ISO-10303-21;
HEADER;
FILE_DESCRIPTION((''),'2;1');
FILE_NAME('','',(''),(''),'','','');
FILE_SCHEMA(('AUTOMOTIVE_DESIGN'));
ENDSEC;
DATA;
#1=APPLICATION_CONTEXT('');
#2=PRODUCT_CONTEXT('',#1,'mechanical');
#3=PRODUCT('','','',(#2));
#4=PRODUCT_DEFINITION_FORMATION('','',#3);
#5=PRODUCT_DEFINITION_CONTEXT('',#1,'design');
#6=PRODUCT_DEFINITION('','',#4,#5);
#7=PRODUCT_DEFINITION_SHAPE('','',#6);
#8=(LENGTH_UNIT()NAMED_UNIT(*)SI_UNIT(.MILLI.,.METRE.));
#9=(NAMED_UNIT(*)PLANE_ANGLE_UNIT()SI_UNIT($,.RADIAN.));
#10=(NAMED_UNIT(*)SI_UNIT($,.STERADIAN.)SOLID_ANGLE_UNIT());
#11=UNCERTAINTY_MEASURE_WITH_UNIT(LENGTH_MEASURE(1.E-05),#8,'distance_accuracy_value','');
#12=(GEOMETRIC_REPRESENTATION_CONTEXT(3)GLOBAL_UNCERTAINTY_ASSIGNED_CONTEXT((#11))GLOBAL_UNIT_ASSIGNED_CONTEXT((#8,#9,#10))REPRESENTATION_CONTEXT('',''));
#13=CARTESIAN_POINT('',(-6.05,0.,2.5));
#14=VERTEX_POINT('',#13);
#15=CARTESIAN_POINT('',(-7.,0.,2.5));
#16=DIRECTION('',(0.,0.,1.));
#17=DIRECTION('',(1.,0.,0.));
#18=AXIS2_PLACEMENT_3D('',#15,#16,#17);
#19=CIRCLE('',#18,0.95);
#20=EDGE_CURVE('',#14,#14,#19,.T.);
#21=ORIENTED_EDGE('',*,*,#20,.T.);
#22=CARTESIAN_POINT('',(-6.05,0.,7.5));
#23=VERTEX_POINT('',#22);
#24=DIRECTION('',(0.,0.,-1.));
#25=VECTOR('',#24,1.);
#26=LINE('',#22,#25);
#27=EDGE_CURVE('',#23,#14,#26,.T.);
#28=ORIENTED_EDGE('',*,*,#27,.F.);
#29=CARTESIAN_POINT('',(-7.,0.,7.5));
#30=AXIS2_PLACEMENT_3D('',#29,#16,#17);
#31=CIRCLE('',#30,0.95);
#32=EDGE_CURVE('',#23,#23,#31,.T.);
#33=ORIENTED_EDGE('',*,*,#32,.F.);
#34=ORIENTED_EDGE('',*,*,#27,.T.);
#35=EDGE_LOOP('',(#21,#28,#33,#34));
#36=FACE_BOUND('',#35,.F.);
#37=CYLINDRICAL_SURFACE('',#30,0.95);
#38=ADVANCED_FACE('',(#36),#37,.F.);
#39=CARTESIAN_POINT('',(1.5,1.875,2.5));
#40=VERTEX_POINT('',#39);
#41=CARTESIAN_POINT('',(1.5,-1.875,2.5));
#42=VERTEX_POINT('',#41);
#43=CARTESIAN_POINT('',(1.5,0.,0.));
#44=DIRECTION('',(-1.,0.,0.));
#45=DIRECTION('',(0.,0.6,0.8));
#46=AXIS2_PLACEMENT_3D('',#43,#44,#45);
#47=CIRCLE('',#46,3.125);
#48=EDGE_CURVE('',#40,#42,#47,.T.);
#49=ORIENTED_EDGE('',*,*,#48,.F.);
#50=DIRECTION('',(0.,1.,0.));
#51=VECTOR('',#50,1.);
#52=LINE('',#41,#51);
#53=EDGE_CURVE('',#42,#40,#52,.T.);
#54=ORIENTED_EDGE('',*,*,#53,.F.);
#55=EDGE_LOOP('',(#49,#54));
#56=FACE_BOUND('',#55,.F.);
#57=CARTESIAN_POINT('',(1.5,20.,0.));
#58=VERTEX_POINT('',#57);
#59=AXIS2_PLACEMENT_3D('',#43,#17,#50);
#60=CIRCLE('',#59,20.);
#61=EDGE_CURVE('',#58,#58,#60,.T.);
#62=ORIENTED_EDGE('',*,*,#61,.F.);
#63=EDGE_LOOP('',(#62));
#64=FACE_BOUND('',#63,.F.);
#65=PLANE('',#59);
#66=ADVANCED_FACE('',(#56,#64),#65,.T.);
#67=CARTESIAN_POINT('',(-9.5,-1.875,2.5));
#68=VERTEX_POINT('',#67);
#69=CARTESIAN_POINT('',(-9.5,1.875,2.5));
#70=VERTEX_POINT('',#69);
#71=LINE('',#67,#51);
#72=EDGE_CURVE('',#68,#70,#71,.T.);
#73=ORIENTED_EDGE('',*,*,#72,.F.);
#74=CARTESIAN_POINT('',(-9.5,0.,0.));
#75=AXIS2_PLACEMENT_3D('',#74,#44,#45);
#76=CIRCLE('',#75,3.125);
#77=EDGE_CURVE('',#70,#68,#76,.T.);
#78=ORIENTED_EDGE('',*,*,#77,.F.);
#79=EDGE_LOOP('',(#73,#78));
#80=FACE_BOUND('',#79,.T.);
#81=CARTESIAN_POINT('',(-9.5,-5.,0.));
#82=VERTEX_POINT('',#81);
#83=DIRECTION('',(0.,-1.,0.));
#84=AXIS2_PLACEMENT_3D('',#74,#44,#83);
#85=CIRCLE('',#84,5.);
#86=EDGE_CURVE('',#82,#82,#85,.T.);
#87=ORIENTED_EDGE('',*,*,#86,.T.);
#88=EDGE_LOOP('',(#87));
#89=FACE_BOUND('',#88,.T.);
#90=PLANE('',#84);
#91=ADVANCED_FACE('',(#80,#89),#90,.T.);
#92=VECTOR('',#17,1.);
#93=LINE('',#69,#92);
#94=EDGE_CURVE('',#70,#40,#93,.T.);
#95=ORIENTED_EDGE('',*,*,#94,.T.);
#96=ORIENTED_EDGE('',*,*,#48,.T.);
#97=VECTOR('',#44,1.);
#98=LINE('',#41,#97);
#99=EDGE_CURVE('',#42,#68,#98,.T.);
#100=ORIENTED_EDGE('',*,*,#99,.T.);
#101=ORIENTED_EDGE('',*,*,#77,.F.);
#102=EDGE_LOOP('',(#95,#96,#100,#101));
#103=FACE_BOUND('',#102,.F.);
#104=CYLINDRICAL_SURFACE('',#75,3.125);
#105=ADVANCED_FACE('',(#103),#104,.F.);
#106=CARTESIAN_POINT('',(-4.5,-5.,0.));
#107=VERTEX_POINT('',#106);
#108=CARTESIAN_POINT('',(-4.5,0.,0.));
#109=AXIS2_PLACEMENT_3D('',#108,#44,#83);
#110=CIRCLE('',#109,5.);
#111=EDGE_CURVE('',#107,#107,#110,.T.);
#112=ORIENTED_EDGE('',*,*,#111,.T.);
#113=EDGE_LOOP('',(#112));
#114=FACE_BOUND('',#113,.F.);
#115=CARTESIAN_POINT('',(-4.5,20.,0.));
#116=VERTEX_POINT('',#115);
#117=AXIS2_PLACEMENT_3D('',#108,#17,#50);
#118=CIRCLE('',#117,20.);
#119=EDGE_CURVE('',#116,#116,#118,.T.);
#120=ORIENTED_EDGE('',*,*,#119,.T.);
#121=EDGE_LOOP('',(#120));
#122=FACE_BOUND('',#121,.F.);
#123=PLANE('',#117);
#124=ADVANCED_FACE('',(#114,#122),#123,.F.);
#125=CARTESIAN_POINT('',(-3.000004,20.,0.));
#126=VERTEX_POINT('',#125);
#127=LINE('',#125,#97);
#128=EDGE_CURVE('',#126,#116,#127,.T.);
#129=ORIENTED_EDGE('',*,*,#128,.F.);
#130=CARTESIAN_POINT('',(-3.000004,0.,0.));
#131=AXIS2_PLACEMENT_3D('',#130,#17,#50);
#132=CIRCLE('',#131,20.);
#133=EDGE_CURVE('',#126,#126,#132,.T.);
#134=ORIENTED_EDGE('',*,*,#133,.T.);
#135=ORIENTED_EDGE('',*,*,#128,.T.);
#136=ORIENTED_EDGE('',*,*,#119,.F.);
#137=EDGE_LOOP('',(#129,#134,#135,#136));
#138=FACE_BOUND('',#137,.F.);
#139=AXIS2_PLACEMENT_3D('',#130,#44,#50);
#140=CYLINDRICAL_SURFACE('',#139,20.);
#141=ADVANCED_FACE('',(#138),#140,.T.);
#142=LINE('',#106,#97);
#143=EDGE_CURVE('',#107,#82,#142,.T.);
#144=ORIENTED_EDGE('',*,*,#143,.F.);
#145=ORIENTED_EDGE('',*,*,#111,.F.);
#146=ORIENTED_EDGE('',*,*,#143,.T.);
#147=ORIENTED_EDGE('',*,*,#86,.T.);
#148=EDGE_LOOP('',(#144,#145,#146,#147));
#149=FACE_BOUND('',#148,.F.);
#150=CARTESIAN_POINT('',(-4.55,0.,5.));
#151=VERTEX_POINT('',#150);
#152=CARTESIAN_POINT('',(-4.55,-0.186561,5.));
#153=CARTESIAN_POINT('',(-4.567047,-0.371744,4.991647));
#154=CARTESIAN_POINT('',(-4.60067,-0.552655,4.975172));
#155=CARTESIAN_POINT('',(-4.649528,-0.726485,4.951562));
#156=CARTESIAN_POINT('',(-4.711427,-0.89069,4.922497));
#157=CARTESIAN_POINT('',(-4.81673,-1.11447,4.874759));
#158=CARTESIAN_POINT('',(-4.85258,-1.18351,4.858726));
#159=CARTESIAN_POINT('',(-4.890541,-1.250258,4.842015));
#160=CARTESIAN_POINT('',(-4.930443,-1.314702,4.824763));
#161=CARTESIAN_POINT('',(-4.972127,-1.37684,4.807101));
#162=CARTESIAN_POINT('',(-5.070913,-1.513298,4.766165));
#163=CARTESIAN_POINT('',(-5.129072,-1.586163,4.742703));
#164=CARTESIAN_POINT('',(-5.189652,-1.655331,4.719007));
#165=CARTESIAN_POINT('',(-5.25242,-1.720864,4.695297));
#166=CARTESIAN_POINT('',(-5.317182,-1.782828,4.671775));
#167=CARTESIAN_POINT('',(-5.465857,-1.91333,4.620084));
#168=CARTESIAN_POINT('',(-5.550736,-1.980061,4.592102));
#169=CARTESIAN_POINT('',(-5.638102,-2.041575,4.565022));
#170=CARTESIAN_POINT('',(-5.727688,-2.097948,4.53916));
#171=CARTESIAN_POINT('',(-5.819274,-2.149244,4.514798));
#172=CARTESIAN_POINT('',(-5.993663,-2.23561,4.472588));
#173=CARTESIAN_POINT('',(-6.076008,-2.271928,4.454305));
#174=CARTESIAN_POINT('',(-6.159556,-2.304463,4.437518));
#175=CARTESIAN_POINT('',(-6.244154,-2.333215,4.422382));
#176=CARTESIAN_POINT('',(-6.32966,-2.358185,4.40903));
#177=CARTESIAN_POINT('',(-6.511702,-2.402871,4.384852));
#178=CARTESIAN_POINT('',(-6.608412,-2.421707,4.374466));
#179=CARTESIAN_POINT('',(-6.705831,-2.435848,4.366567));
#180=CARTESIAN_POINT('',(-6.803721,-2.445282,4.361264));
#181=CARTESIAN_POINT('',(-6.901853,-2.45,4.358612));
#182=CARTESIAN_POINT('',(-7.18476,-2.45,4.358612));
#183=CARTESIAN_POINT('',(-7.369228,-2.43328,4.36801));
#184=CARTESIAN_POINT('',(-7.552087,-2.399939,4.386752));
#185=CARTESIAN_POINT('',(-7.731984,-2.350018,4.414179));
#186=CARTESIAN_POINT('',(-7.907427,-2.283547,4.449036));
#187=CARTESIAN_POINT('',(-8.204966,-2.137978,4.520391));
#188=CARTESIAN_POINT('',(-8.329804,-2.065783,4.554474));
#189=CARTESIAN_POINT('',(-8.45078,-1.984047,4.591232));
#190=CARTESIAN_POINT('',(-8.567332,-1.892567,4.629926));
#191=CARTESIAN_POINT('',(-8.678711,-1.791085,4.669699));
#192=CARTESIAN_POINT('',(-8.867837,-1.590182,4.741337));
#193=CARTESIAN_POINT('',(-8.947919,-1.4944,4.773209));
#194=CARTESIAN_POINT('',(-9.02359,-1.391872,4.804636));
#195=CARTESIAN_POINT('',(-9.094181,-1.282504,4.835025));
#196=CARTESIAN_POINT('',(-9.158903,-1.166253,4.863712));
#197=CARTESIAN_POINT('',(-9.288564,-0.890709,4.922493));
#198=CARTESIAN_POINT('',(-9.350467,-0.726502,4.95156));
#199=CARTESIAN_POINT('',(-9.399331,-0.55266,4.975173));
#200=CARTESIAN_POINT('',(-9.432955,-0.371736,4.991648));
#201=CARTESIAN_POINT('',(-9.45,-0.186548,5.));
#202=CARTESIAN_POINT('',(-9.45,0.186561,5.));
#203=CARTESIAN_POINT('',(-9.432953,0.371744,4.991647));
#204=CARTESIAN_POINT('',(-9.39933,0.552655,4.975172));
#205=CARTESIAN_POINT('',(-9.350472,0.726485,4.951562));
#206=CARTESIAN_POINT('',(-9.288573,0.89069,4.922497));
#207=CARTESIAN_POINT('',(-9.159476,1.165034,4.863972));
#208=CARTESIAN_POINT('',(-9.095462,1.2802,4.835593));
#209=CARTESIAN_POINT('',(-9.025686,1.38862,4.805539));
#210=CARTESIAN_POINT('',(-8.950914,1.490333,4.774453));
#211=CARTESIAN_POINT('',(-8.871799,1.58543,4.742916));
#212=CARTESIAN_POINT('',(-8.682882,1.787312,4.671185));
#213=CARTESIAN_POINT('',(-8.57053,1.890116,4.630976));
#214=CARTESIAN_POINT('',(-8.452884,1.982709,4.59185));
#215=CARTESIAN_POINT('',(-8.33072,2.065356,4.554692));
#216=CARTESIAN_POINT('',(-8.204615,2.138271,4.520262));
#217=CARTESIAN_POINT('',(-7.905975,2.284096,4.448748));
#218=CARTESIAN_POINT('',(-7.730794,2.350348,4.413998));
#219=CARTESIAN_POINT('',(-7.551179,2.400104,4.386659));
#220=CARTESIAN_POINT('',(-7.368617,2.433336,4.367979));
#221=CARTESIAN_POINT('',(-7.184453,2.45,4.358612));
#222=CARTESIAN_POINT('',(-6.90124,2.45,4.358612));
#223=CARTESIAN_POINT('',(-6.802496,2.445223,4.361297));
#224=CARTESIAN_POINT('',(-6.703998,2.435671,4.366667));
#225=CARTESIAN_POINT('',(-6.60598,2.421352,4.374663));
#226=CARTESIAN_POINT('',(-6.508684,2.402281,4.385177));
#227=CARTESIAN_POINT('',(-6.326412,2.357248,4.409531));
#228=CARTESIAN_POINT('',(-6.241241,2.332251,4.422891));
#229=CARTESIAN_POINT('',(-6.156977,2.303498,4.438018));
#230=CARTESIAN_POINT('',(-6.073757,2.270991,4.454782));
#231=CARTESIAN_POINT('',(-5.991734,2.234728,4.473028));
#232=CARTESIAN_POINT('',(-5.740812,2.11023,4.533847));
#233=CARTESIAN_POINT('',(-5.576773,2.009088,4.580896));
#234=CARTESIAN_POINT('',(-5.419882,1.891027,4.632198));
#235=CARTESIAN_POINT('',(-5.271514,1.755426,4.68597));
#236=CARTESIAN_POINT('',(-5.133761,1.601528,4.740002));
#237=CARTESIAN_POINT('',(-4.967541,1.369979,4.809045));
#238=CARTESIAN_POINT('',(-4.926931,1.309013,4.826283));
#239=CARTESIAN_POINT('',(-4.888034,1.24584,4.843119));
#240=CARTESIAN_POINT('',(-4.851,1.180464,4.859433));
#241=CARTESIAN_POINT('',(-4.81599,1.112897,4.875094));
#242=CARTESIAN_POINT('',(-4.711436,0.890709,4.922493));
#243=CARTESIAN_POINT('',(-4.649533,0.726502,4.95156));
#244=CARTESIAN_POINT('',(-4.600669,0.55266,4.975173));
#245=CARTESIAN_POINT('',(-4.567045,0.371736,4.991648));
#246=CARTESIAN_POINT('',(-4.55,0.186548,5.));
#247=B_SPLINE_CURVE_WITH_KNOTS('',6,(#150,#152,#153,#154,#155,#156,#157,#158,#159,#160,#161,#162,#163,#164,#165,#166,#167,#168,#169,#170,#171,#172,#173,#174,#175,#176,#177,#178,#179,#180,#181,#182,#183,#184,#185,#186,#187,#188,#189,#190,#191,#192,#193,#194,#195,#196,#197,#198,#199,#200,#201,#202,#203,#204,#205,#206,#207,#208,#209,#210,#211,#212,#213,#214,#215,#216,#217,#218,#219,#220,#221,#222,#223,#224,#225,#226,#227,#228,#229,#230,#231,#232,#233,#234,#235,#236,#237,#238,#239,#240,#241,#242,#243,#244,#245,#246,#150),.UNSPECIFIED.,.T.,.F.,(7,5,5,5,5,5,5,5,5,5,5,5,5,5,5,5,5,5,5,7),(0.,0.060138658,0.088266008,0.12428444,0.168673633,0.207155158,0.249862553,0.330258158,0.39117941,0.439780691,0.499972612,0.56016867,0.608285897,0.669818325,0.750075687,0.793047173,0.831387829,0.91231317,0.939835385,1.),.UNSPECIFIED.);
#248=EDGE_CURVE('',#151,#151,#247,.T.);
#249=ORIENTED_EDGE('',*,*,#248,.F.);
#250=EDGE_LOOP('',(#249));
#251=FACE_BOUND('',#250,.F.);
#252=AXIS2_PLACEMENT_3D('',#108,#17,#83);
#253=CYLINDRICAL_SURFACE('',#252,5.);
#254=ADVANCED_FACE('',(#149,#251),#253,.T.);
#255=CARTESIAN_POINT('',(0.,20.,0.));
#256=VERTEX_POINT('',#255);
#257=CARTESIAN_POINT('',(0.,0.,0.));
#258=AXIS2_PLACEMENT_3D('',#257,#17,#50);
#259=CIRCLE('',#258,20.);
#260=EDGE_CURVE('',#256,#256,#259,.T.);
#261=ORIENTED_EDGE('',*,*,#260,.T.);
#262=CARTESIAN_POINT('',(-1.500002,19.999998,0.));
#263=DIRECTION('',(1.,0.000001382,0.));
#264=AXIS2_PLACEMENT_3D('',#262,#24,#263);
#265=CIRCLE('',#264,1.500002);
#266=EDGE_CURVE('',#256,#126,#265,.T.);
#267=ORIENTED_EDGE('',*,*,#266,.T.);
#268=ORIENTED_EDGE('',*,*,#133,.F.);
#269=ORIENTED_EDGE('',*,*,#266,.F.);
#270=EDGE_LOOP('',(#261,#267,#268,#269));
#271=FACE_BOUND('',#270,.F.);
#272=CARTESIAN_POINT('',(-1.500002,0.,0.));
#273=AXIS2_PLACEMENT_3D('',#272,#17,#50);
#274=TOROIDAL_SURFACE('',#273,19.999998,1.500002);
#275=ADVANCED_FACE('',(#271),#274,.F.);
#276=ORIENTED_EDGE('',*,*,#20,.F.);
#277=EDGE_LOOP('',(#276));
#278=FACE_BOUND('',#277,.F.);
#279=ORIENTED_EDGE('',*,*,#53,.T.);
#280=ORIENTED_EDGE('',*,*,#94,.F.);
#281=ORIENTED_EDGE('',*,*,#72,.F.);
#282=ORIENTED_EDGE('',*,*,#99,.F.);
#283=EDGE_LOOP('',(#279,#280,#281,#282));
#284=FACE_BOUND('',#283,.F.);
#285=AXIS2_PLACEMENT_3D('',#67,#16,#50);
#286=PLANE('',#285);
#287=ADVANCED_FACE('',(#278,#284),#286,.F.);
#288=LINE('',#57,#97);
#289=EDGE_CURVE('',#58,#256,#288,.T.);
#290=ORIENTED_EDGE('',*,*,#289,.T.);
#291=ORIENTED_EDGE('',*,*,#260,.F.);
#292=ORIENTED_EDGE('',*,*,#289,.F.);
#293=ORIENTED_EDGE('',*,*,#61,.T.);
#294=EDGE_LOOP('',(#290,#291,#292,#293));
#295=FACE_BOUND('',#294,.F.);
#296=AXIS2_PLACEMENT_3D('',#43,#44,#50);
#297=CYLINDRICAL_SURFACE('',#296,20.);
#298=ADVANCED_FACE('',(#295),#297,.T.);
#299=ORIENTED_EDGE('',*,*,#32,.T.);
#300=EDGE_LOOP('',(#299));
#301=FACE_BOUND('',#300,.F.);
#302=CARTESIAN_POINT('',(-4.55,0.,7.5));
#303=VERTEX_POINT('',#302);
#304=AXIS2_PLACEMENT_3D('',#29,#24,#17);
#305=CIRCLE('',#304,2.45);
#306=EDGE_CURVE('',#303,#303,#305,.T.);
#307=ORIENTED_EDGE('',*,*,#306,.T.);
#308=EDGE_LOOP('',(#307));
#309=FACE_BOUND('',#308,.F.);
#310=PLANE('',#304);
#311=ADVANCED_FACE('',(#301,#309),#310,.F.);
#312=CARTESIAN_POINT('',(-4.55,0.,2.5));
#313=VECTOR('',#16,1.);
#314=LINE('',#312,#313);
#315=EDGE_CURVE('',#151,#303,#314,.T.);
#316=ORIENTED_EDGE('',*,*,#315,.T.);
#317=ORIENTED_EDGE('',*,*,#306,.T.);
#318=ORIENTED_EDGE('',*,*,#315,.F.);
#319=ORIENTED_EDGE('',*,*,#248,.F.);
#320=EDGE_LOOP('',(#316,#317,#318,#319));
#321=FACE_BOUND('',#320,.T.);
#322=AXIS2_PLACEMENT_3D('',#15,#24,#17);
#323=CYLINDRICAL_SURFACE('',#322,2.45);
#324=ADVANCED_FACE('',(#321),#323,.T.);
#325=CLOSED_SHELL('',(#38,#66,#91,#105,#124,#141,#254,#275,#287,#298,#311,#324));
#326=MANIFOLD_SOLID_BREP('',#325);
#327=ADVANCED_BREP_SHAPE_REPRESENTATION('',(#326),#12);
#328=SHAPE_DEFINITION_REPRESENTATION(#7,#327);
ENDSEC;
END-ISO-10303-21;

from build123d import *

# Parameters (mm, degrees)
F3_R      = 5
F4_DEPTH  = 5
F7_DEPTH  = 11
F9_R      = 2.45
F10_DEPTH = 5
F12_R     = 0.95
F13_DEPTH = 5


# Not quite as in the source:
# - ends of sketch curves that miss each other by under 0.0002 mm in the source are joined


with BuildPart() as f1:
    # F0 (on Top) → F1 (revolve)
    with BuildSketch(Plane.XY):
        with BuildLine():
            Line((-4.5, 0), (1.5, 0))
            Line((1.5, 0), (1.5, 20))
            Line((1.5, 20), (0, 20))
            ThreePointArc((0, 20), (-1.5, 18.4999958554), (-3.0000041446, 20))
            Line((-3.0000041446, 20), (-4.5, 20))
            Line((-4.5, 20), (-4.5, 0))
        make_face()
    revolve(axis=Axis((-1.5, 0, 0), (1, 0, 0)))

    # F3 (on offset) → F4 (join)
    with BuildSketch(Plane(origin=(-4.5, 0, 0), x_dir=(0, -1, 0), z_dir=(-1, 0, 0))):
        Circle(F3_R)
    extrude(amount=F4_DEPTH)

    # F6 (on offset) → F7 (cut, through all)
    with BuildSketch(Plane(origin=(-9.5, 0, 0), x_dir=(0, -1, 0), z_dir=(-1, 0, 0))):
        with BuildLine():
            Line((1.875, 2.5), (-1.875, 2.5))
            ThreePointArc((-1.875, 2.5), (0, -3.125), (1.875, 2.5))
        make_face()
    extrude(amount=-F7_DEPTH, mode=Mode.SUBTRACT)

    # F9 (on offset) → F10 (join)
    with BuildSketch(Plane(origin=(0, 0, 2.5), x_dir=(1, 0, 0), z_dir=(0, 0, -1))):
        with Locations((-7, 0)):
            Circle(F9_R)
    extrude(amount=-F10_DEPTH)

    # F12 (on offset) → F13 (cut, through all)
    with BuildSketch(Plane.XY.offset(7.5)):
        with Locations((-7, 0)):
            Circle(F12_R)
    extrude(amount=-F13_DEPTH, mode=Mode.SUBTRACT)


solid = f1.part
